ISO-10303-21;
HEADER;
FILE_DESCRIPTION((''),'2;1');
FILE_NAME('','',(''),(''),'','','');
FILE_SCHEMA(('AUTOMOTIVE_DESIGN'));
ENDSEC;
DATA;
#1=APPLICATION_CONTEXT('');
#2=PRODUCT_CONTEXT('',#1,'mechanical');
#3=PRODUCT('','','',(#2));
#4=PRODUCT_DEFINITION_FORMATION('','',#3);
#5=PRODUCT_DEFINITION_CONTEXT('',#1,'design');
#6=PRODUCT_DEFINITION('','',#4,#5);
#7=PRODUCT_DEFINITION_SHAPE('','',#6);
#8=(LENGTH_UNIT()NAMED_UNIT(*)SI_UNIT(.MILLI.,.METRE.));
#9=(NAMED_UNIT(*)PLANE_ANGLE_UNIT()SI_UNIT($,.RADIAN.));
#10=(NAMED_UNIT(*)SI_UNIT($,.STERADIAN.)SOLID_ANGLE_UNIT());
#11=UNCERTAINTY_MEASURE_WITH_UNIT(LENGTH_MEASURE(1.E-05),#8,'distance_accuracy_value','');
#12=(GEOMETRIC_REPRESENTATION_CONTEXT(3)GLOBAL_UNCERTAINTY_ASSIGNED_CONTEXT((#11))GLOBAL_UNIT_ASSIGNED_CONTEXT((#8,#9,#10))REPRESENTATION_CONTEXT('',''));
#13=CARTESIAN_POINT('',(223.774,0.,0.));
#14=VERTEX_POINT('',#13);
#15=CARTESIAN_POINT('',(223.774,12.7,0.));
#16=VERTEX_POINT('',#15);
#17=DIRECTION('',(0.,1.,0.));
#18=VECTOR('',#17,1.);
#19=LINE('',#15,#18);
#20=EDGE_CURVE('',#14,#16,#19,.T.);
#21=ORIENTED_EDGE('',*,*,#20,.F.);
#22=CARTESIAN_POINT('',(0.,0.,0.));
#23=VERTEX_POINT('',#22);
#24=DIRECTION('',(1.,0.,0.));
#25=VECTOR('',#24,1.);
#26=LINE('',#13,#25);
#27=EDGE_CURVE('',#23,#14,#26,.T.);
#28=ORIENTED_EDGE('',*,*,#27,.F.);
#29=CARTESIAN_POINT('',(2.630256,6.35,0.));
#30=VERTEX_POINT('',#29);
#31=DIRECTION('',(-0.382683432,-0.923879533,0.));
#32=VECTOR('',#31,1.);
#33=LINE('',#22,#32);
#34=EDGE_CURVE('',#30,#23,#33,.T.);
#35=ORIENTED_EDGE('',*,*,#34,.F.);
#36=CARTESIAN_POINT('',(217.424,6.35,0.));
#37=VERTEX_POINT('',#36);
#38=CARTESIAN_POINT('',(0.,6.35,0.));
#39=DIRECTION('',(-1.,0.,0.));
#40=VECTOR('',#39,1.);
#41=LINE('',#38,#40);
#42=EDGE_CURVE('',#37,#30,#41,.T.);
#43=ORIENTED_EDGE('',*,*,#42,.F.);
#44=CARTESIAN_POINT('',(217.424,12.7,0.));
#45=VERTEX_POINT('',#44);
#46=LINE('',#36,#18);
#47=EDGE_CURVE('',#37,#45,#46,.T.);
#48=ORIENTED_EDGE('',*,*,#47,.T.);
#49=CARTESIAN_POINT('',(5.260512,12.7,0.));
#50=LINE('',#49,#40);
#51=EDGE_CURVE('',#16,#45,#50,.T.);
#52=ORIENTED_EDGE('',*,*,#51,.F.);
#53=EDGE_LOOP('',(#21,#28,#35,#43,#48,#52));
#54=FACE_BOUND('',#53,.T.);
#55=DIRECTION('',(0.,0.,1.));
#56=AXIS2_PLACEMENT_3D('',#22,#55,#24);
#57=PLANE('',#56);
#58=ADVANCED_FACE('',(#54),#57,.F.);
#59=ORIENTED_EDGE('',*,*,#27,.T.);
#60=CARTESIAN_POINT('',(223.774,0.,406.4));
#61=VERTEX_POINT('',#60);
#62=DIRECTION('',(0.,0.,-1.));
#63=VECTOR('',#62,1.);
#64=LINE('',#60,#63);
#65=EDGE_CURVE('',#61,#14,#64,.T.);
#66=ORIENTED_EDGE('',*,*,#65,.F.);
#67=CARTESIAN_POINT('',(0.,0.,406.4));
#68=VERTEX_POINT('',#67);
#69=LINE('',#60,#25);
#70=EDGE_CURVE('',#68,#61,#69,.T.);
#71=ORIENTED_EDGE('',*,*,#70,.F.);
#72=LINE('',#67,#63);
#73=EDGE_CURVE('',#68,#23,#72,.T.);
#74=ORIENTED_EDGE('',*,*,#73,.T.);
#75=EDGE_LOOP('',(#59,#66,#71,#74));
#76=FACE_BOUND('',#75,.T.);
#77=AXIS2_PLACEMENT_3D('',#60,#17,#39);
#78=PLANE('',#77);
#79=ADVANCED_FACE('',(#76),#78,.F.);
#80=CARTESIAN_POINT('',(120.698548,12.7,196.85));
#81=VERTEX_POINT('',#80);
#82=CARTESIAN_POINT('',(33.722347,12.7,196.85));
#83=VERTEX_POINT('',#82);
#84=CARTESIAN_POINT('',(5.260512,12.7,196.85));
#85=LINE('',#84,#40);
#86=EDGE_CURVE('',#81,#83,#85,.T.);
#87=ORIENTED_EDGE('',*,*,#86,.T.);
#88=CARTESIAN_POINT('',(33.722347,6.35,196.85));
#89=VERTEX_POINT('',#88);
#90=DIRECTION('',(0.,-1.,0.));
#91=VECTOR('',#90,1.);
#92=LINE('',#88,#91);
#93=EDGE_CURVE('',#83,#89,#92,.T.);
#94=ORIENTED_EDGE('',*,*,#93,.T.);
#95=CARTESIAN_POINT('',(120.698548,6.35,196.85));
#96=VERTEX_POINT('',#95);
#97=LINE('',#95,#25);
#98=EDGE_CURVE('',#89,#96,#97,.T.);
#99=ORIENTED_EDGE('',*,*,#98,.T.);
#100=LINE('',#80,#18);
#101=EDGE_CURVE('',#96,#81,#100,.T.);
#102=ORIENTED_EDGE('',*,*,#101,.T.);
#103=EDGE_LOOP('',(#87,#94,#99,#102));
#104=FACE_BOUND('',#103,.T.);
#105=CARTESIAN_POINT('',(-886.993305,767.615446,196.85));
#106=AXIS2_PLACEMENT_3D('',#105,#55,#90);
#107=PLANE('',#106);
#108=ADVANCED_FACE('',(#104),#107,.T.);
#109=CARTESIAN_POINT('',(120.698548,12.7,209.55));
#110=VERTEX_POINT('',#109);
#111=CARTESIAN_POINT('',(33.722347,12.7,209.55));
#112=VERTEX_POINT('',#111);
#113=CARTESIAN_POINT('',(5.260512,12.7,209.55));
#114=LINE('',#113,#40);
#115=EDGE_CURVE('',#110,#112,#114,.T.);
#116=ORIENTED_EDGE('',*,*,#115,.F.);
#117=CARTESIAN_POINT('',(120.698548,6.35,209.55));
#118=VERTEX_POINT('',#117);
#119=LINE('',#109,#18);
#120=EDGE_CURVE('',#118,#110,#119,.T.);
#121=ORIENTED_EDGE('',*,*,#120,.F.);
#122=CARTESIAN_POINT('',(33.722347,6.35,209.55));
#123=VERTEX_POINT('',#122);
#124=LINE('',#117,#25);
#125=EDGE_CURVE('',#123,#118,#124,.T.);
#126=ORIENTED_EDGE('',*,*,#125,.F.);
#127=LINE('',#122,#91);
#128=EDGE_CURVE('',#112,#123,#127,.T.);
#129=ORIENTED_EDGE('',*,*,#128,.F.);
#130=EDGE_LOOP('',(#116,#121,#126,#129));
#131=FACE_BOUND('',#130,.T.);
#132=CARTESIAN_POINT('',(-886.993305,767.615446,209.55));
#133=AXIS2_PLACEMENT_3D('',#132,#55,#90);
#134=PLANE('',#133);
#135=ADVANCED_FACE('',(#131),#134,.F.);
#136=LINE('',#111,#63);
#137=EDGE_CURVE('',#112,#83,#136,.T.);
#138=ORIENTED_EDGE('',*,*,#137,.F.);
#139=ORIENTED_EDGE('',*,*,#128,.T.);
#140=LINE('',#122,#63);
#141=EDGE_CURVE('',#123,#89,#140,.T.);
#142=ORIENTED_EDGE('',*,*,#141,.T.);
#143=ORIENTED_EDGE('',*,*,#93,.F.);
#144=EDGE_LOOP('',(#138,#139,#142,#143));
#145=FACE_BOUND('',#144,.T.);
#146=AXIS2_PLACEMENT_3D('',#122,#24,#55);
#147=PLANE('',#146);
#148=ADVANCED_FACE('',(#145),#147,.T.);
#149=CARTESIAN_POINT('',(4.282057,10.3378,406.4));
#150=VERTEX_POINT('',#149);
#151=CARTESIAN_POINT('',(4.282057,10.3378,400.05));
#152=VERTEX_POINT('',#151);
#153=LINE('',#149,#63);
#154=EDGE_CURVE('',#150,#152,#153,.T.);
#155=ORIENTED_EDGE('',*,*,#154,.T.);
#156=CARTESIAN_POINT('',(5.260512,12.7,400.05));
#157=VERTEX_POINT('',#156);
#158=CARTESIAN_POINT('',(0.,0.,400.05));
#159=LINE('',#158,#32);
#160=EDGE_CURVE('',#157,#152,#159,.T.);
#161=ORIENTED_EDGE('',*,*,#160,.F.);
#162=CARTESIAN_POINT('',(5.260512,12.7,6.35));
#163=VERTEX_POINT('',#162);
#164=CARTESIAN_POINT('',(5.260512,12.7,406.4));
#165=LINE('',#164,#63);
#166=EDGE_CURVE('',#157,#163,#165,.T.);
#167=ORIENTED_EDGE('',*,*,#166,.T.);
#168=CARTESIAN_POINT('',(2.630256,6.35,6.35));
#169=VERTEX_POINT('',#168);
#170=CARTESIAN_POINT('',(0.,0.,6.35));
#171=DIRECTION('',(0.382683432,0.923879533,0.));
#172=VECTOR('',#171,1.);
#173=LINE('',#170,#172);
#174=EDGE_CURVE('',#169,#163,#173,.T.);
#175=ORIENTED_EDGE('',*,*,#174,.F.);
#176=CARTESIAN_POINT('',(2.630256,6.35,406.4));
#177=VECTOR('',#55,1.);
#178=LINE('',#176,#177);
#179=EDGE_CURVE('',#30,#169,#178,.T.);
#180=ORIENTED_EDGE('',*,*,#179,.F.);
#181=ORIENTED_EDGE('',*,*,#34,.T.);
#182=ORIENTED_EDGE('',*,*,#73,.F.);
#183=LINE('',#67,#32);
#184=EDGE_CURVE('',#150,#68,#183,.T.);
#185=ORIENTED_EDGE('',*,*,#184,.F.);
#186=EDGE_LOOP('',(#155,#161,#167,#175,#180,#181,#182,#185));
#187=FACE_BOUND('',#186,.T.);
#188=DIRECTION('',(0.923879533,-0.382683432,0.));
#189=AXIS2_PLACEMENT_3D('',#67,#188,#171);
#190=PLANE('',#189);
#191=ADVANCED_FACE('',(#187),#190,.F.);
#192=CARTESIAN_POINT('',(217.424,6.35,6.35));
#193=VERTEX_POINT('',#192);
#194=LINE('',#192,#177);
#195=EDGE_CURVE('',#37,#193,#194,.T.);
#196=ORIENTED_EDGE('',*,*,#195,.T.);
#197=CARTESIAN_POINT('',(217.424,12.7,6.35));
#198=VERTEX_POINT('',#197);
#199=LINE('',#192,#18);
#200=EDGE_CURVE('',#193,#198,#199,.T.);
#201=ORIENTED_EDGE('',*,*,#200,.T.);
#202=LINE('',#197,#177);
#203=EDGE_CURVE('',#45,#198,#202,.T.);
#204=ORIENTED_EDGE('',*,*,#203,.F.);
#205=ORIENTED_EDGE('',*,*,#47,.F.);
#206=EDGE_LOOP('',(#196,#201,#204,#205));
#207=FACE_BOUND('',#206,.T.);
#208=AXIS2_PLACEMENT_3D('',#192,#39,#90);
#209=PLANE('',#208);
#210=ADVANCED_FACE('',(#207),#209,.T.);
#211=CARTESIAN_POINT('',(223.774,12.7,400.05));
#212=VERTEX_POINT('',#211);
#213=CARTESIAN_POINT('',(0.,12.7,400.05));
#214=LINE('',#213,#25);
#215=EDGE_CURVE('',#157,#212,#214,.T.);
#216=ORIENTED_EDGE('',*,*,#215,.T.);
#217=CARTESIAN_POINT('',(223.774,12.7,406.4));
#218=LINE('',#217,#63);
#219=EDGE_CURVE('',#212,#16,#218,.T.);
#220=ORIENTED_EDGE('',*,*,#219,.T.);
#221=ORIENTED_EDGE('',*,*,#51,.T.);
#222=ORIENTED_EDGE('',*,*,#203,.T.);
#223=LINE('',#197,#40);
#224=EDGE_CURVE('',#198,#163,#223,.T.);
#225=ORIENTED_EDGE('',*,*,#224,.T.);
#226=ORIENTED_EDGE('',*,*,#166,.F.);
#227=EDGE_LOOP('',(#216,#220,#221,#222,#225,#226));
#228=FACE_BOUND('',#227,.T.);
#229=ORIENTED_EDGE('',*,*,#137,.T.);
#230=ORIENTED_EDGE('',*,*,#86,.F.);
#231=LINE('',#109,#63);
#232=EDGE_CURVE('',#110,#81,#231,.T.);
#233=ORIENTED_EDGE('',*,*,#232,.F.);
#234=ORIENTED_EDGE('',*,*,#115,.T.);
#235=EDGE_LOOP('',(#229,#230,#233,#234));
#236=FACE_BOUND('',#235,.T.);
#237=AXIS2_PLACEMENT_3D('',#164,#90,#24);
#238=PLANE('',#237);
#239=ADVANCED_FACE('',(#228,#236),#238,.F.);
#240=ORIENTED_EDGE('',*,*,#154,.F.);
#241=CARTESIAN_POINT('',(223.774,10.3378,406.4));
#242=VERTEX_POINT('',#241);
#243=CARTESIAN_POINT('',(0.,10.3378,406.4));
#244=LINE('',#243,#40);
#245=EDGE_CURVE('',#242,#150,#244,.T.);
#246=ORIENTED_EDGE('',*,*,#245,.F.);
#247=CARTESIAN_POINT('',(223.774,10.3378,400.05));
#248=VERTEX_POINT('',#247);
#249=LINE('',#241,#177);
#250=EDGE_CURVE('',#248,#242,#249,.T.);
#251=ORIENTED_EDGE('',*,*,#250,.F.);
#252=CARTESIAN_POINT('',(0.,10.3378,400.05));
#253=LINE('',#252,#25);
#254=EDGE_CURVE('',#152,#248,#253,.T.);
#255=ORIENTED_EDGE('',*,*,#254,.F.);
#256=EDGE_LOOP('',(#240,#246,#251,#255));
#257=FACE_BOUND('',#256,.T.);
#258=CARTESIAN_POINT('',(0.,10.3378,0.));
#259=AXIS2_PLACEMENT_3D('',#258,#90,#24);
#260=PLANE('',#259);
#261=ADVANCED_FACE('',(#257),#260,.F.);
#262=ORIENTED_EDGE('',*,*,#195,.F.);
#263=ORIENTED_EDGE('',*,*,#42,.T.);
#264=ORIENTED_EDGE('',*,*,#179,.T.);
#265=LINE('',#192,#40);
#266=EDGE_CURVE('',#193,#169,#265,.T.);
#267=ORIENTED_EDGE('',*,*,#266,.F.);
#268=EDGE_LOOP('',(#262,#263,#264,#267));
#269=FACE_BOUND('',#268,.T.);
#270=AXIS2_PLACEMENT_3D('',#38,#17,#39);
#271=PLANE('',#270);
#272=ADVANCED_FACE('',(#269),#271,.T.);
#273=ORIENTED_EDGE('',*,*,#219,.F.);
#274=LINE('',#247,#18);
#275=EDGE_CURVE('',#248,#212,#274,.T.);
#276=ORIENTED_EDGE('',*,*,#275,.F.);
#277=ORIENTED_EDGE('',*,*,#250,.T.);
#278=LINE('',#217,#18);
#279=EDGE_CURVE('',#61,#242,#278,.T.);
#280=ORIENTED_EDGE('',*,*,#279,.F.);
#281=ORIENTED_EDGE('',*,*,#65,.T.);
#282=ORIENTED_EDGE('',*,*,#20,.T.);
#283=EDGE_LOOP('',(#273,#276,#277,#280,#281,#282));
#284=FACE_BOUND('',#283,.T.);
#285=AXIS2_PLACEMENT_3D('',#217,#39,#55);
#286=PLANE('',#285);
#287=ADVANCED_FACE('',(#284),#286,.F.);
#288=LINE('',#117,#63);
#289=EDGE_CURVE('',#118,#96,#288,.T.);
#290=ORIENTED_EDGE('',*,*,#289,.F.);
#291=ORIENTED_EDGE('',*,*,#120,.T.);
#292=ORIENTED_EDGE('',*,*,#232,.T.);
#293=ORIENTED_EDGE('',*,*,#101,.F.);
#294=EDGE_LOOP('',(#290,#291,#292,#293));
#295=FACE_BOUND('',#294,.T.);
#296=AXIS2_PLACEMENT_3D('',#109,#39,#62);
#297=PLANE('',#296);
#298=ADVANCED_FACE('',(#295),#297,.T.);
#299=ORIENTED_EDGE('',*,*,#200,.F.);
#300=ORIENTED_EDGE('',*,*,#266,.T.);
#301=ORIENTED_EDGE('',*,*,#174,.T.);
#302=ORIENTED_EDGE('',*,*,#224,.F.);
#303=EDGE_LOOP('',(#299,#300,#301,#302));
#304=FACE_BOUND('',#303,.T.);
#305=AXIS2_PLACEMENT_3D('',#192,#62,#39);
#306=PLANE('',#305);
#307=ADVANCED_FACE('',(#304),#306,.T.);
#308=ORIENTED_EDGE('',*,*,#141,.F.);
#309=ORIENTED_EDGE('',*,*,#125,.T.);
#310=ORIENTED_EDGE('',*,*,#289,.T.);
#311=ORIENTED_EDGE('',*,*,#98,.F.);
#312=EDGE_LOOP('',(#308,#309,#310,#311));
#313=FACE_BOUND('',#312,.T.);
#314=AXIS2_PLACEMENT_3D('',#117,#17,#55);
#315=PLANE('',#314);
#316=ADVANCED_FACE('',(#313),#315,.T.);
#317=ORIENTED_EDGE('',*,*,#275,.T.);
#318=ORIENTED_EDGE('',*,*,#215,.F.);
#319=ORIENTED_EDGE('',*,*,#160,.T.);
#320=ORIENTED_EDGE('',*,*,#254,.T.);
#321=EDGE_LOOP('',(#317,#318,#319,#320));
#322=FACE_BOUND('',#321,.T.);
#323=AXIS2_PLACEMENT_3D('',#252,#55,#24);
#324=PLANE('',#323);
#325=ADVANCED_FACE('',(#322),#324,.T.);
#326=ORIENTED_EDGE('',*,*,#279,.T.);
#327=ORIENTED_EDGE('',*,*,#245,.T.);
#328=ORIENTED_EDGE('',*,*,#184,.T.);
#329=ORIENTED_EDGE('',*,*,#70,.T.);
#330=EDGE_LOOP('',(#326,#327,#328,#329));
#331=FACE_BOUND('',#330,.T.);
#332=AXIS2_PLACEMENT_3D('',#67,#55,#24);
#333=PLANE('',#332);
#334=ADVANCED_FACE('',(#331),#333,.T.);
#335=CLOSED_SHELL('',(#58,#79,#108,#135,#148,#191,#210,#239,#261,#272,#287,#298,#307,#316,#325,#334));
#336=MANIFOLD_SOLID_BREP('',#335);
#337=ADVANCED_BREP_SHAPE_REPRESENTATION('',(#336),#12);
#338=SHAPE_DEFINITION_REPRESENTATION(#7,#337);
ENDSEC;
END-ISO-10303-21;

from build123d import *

# Parameters (mm, degrees)
BOSS_EXTRUDE1_DEPTH = 406.4
SKETCH2_W           = 239.802769694
SKETCH2_H           = 6.35
CUT_EXTRUDE1_DEPTH  = 6.35
SKETCH3_W           = 223.774
SKETCH3_H           = 6.35
CUT_EXTRUDE2_DEPTH  = 2.3622
CAVITY1_START       = 6.35
CAVITY1_OUTLINE_W   = 86.976200951
CAVITY1_OUTLINE_H   = 12.7
CAVITY1_DEPTH       = 6.35


# Read off the part's stored shape, not the designer's step: Cavity1
with BuildPart() as part:
    # Sketch1 → Boss-Extrude1 (new body)
    with BuildSketch(Plane.XY):
        Polygon((0, 0), (5.260512242, 12.7), (223.774, 12.7), (223.774, 0), align=None)
    extrude(amount=BOSS_EXTRUDE1_DEPTH)

    # Sketch2 → Cut-Extrude1 (cut)
    with BuildSketch(Plane.XZ.offset(-12.7)):
        with Locations((97.522615153, 3.175)):
            Rectangle(SKETCH2_W, SKETCH2_H)
    extrude(amount=CUT_EXTRUDE1_DEPTH, mode=Mode.SUBTRACT)

    # Sketch3 → Cut-Extrude2 (cut)
    with BuildSketch(Plane.XZ.offset(-12.7)):
        with Locations((111.887, 403.225)):
            Rectangle(SKETCH3_W, SKETCH3_H)
    extrude(amount=CUT_EXTRUDE2_DEPTH, mode=Mode.SUBTRACT)

    # Cavity1 outline → Cavity1 (cut)
    with BuildSketch(Plane(origin=(0, 0, 0), x_dir=(1, 0, 0), z_dir=(0, 1, 0)).offset(CAVITY1_START)):
        with Locations((77.210447741, -203.2)):
            Rectangle(CAVITY1_OUTLINE_W, CAVITY1_OUTLINE_H)
    extrude(amount=CAVITY1_DEPTH, mode=Mode.SUBTRACT)


solid = part.part
